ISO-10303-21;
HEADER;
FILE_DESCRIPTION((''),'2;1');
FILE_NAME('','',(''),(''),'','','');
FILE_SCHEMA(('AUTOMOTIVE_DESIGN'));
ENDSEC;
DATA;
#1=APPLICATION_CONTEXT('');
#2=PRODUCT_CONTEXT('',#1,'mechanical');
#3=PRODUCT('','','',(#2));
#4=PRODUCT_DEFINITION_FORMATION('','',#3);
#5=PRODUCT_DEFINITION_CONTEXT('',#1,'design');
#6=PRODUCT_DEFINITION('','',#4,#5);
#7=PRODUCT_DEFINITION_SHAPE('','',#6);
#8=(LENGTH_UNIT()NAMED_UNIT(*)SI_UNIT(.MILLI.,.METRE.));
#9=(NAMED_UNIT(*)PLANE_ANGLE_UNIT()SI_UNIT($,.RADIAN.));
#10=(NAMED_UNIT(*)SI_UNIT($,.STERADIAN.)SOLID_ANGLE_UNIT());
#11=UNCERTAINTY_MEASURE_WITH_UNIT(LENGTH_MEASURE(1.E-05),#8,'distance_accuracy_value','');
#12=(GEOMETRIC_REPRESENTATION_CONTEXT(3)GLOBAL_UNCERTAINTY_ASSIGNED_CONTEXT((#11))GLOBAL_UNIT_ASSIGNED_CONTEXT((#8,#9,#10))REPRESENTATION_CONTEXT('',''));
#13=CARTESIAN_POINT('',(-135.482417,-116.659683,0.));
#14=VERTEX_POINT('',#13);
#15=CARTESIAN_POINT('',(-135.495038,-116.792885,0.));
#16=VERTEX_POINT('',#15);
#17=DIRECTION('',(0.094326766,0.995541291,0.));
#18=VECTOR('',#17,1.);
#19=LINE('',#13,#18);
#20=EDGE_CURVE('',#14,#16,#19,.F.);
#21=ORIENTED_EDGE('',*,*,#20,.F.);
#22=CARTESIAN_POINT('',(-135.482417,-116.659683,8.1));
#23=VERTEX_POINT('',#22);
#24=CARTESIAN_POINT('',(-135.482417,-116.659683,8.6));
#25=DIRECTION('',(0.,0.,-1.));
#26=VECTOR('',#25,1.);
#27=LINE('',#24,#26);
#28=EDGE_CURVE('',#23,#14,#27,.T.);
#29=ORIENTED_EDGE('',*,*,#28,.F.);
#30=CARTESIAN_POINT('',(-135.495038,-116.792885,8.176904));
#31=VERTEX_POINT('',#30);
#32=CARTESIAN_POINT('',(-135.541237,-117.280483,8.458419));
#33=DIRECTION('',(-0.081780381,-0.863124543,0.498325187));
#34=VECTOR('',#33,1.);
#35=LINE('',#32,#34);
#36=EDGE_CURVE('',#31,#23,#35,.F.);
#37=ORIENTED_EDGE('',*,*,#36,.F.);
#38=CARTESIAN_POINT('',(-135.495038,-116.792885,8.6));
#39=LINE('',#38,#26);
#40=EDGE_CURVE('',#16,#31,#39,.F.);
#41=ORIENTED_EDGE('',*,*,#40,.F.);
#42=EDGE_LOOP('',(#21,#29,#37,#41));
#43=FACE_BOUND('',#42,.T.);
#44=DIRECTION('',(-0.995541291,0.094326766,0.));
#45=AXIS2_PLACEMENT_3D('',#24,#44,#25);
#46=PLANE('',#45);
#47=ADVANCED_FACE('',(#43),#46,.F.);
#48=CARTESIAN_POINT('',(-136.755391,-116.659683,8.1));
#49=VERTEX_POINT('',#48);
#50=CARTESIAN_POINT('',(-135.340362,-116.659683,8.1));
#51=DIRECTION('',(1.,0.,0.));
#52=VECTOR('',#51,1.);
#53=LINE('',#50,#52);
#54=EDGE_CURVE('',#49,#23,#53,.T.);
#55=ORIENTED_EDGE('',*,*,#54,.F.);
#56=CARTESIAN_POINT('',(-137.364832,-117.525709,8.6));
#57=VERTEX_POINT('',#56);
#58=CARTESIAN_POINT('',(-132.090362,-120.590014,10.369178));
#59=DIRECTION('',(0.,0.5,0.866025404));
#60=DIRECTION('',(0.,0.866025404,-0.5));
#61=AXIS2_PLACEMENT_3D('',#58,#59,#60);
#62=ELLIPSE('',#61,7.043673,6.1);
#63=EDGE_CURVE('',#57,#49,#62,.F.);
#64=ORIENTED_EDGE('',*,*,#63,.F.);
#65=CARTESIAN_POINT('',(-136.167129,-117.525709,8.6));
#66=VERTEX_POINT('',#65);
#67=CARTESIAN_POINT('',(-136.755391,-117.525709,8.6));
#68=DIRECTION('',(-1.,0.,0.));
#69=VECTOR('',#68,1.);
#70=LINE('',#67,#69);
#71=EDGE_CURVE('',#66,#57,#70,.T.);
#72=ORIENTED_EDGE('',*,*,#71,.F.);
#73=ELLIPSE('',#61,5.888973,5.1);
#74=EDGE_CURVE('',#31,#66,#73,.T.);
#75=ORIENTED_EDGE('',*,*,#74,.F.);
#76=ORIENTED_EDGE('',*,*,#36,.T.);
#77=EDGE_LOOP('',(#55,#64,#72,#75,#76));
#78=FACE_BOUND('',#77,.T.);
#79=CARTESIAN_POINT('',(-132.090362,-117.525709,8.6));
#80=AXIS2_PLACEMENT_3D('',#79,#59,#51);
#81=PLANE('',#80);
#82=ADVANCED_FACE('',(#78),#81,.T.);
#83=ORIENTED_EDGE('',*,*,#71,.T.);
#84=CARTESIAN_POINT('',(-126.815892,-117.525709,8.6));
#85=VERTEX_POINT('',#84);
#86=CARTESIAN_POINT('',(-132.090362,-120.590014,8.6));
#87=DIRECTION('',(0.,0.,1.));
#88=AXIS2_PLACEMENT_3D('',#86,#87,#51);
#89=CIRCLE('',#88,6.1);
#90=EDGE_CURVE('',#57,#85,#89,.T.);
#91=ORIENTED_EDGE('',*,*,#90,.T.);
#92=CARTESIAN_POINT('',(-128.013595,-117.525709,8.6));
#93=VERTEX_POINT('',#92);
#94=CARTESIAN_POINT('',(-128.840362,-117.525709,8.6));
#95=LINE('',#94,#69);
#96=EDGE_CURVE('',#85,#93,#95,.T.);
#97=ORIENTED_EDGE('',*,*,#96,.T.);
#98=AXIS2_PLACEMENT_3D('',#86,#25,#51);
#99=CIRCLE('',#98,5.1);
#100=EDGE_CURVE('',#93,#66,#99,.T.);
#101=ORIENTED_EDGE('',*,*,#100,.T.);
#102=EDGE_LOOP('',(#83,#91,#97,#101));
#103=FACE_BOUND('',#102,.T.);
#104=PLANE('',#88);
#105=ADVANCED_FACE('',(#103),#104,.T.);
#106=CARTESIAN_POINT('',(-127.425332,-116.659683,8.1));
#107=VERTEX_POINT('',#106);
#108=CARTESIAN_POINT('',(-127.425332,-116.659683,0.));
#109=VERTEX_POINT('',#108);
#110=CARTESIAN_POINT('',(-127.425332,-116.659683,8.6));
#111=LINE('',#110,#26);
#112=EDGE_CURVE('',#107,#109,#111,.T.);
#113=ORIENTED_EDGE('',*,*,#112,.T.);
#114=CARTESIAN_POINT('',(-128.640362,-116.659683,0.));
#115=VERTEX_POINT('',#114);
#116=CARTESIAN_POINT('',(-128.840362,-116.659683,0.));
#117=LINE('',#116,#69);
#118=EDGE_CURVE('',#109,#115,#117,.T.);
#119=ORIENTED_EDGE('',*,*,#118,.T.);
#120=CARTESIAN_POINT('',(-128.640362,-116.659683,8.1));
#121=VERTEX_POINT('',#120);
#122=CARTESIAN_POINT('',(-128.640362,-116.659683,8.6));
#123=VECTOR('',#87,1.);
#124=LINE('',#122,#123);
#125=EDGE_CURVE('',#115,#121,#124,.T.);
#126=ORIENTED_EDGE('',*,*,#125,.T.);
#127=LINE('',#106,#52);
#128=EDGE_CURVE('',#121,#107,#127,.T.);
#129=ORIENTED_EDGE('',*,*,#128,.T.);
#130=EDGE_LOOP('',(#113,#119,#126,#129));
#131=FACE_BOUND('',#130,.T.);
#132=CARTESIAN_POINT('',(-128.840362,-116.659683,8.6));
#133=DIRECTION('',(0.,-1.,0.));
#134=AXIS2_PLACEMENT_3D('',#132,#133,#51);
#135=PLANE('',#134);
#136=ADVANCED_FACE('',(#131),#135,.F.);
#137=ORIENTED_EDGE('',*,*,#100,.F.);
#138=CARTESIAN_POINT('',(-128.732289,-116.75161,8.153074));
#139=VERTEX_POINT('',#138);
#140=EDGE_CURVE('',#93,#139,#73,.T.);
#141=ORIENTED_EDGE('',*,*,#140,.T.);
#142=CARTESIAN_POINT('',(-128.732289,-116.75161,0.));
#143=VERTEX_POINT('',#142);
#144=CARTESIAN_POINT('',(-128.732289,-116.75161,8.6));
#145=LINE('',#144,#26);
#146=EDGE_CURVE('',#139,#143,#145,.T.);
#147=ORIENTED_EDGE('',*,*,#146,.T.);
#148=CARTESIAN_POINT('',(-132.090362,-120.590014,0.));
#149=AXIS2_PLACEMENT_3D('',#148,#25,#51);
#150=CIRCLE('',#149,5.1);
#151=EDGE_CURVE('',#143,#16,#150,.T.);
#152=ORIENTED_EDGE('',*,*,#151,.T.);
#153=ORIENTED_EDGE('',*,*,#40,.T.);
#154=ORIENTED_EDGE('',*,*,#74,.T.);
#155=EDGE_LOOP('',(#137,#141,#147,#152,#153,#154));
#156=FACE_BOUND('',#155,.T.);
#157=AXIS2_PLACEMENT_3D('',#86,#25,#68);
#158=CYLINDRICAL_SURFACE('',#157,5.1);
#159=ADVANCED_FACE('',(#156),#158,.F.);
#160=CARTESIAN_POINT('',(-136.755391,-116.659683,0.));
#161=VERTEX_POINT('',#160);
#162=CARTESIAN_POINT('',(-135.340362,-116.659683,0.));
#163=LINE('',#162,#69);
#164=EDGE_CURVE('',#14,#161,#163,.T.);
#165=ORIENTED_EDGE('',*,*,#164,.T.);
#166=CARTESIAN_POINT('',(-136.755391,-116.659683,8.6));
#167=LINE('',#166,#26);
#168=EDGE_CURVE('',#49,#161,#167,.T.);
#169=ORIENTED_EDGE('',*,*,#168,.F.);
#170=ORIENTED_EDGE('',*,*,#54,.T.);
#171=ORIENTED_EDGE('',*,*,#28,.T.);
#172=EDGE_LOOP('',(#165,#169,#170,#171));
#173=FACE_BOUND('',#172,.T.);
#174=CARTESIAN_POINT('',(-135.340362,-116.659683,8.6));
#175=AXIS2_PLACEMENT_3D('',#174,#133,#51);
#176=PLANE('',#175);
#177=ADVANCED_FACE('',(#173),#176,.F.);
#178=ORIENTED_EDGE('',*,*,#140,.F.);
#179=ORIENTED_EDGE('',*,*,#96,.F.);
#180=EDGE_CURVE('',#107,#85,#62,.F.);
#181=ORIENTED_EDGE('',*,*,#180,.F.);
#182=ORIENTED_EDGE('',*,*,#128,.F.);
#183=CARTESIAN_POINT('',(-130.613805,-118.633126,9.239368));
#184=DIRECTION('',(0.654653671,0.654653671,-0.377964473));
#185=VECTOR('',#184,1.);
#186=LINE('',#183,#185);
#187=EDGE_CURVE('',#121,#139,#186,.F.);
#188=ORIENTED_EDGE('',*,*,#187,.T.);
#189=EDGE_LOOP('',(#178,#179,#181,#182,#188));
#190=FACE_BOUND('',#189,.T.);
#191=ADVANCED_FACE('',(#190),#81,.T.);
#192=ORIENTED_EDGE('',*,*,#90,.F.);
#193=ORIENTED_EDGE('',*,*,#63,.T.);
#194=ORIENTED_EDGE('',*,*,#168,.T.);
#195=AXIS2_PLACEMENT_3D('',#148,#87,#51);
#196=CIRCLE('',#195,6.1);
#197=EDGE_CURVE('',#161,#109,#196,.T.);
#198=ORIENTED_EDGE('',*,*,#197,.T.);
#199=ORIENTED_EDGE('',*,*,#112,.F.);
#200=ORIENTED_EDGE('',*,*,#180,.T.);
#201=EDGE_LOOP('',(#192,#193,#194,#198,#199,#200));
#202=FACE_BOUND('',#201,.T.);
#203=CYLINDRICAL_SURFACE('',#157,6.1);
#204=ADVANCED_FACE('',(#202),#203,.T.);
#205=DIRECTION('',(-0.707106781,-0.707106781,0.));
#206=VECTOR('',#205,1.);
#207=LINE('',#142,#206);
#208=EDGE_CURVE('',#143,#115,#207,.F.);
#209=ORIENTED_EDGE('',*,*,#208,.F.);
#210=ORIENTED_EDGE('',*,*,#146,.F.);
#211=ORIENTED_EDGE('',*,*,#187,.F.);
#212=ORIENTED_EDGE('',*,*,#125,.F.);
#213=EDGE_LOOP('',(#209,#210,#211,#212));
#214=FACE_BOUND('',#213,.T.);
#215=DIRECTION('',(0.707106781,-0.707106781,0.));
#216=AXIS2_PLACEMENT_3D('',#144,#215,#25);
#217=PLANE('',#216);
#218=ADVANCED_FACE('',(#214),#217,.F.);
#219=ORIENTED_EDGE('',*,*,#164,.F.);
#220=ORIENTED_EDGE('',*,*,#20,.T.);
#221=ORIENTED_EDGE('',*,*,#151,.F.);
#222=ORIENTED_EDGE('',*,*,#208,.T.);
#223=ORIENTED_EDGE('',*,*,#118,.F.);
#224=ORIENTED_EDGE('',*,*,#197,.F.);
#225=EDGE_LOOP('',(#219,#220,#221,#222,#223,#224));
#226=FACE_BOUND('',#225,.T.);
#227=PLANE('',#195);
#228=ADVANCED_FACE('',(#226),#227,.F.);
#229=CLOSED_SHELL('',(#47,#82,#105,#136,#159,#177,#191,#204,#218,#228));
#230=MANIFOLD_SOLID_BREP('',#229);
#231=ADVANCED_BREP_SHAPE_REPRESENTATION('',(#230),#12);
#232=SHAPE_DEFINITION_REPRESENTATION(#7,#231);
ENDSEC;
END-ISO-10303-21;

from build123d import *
from OCP.BRepFilletAPI import BRepFilletAPI_MakeChamfer

# Parameters (mm, degrees)
EXTRUDE_1_DEPTH  = 8.6
CHAMFER_1_SIZE   = 0.5
CHAMFER_1_SIZE2  = 0.866025404
CHAMFER_2_SIZE   = 0.142054737
CHAMFER_2_SIZE_2 = 0.2


with BuildPart() as part:
    # 草图1 → 凸台-拉伸1 (new body)
    with BuildSketch(Plane.XY):
        with BuildLine():
            Line((-128.840361964, -116.659683115), (-127.425332489, -116.659683115))
            ThreePointArc((-127.425332489, -116.659683115), (-132.090361964, -126.69001389), (-136.755391439, -116.659683115))
            Line((-136.755391439, -116.659683115), (-135.340361964, -116.659683115))
            ThreePointArc((-135.340361964, -116.659683115), (-132.090361964, -125.69001389), (-128.840361964, -116.659683115))
        make_face()
    extrude(amount=EXTRUDE_1_DEPTH)

    # 倒角1: one chamfer whose edges measure the first distance from different faces: ONE call of the kernel's chamfer builder (chamfer() names one face for all edges)
    chamfer_1_edges_1 = [part.edges().sort_by_distance(p)[0] for p in [
        (-136.047876701, -116.659683115, 8.6),
    ]]
    chamfer_1_side_1 = [part.faces().sort_by_distance(p)[0] for p in [
        (-136.047876701, -116.659683115, 4.3),
    ]]
    chamfer_1_edges_2 = [part.edges().sort_by_distance(p)[0] for p in [
        (-128.132847227, -116.659683115, 8.6),
    ]]
    chamfer_1_side_2 = [part.faces().sort_by_distance(p)[0] for p in [
        (-128.132847227, -116.659683115, 4.3),
    ]]
    chamfer_1 = BRepFilletAPI_MakeChamfer(part.part.solid().wrapped)
    for e in chamfer_1_edges_1:
        chamfer_1.Add(CHAMFER_1_SIZE, CHAMFER_1_SIZE2, e.wrapped, chamfer_1_side_1[0].wrapped)  # the first distance lies on this face
    for e in chamfer_1_edges_2:
        chamfer_1.Add(CHAMFER_1_SIZE, CHAMFER_1_SIZE2, e.wrapped, chamfer_1_side_2[0].wrapped)  # the first distance lies on this face
    add(Compound.cast(chamfer_1.Shape()), mode=Mode.REPLACE)

    # 倒角2
    # the kernel refuses this chamfer: 0.2, 0.142054737 mm, written as the material it takes off along each edge
    with BuildSketch(Plane(origin=(-135.340361964, -116.659683115, -0.524920029), x_dir=(-0.7577457918240572, -0.6525498563120925, 0), z_dir=(0, 0, 1))) as chamfer_2_piece_1:
        with BuildLine():
            Line((0.204125918, 0), (CHAMFER_2_SIZE * 0.757745791973, -CHAMFER_2_SIZE * 0.65254985644))
            Line((CHAMFER_2_SIZE * 0.757745791973, -CHAMFER_2_SIZE * 0.65254985644), (0, 0))
            ThreePointArc((0, 0), (0.104949569, -0.001020545), (0.204125918, 0))
        make_face()
    extrude(amount=9.149840059, mode=Mode.SUBTRACT)
    with BuildSketch(Plane(origin=(-128.840361964, -116.659683115, -0.514336598), x_dir=(1, 0, 0), z_dir=(0, 0, 1))) as chamfer_2_piece_2:
        with BuildLine():
            Line((CHAMFER_2_SIZE_2, 0), (0.108073152, -0.091926848))
            ThreePointArc((0.108073152, -0.091926848), (0.054110864, -0.045378858), (0, 0))
            Line((0, 0), (CHAMFER_2_SIZE_2, 0))
        make_face()
    extrude(amount=9.128673195, mode=Mode.SUBTRACT)


solid = part.part
